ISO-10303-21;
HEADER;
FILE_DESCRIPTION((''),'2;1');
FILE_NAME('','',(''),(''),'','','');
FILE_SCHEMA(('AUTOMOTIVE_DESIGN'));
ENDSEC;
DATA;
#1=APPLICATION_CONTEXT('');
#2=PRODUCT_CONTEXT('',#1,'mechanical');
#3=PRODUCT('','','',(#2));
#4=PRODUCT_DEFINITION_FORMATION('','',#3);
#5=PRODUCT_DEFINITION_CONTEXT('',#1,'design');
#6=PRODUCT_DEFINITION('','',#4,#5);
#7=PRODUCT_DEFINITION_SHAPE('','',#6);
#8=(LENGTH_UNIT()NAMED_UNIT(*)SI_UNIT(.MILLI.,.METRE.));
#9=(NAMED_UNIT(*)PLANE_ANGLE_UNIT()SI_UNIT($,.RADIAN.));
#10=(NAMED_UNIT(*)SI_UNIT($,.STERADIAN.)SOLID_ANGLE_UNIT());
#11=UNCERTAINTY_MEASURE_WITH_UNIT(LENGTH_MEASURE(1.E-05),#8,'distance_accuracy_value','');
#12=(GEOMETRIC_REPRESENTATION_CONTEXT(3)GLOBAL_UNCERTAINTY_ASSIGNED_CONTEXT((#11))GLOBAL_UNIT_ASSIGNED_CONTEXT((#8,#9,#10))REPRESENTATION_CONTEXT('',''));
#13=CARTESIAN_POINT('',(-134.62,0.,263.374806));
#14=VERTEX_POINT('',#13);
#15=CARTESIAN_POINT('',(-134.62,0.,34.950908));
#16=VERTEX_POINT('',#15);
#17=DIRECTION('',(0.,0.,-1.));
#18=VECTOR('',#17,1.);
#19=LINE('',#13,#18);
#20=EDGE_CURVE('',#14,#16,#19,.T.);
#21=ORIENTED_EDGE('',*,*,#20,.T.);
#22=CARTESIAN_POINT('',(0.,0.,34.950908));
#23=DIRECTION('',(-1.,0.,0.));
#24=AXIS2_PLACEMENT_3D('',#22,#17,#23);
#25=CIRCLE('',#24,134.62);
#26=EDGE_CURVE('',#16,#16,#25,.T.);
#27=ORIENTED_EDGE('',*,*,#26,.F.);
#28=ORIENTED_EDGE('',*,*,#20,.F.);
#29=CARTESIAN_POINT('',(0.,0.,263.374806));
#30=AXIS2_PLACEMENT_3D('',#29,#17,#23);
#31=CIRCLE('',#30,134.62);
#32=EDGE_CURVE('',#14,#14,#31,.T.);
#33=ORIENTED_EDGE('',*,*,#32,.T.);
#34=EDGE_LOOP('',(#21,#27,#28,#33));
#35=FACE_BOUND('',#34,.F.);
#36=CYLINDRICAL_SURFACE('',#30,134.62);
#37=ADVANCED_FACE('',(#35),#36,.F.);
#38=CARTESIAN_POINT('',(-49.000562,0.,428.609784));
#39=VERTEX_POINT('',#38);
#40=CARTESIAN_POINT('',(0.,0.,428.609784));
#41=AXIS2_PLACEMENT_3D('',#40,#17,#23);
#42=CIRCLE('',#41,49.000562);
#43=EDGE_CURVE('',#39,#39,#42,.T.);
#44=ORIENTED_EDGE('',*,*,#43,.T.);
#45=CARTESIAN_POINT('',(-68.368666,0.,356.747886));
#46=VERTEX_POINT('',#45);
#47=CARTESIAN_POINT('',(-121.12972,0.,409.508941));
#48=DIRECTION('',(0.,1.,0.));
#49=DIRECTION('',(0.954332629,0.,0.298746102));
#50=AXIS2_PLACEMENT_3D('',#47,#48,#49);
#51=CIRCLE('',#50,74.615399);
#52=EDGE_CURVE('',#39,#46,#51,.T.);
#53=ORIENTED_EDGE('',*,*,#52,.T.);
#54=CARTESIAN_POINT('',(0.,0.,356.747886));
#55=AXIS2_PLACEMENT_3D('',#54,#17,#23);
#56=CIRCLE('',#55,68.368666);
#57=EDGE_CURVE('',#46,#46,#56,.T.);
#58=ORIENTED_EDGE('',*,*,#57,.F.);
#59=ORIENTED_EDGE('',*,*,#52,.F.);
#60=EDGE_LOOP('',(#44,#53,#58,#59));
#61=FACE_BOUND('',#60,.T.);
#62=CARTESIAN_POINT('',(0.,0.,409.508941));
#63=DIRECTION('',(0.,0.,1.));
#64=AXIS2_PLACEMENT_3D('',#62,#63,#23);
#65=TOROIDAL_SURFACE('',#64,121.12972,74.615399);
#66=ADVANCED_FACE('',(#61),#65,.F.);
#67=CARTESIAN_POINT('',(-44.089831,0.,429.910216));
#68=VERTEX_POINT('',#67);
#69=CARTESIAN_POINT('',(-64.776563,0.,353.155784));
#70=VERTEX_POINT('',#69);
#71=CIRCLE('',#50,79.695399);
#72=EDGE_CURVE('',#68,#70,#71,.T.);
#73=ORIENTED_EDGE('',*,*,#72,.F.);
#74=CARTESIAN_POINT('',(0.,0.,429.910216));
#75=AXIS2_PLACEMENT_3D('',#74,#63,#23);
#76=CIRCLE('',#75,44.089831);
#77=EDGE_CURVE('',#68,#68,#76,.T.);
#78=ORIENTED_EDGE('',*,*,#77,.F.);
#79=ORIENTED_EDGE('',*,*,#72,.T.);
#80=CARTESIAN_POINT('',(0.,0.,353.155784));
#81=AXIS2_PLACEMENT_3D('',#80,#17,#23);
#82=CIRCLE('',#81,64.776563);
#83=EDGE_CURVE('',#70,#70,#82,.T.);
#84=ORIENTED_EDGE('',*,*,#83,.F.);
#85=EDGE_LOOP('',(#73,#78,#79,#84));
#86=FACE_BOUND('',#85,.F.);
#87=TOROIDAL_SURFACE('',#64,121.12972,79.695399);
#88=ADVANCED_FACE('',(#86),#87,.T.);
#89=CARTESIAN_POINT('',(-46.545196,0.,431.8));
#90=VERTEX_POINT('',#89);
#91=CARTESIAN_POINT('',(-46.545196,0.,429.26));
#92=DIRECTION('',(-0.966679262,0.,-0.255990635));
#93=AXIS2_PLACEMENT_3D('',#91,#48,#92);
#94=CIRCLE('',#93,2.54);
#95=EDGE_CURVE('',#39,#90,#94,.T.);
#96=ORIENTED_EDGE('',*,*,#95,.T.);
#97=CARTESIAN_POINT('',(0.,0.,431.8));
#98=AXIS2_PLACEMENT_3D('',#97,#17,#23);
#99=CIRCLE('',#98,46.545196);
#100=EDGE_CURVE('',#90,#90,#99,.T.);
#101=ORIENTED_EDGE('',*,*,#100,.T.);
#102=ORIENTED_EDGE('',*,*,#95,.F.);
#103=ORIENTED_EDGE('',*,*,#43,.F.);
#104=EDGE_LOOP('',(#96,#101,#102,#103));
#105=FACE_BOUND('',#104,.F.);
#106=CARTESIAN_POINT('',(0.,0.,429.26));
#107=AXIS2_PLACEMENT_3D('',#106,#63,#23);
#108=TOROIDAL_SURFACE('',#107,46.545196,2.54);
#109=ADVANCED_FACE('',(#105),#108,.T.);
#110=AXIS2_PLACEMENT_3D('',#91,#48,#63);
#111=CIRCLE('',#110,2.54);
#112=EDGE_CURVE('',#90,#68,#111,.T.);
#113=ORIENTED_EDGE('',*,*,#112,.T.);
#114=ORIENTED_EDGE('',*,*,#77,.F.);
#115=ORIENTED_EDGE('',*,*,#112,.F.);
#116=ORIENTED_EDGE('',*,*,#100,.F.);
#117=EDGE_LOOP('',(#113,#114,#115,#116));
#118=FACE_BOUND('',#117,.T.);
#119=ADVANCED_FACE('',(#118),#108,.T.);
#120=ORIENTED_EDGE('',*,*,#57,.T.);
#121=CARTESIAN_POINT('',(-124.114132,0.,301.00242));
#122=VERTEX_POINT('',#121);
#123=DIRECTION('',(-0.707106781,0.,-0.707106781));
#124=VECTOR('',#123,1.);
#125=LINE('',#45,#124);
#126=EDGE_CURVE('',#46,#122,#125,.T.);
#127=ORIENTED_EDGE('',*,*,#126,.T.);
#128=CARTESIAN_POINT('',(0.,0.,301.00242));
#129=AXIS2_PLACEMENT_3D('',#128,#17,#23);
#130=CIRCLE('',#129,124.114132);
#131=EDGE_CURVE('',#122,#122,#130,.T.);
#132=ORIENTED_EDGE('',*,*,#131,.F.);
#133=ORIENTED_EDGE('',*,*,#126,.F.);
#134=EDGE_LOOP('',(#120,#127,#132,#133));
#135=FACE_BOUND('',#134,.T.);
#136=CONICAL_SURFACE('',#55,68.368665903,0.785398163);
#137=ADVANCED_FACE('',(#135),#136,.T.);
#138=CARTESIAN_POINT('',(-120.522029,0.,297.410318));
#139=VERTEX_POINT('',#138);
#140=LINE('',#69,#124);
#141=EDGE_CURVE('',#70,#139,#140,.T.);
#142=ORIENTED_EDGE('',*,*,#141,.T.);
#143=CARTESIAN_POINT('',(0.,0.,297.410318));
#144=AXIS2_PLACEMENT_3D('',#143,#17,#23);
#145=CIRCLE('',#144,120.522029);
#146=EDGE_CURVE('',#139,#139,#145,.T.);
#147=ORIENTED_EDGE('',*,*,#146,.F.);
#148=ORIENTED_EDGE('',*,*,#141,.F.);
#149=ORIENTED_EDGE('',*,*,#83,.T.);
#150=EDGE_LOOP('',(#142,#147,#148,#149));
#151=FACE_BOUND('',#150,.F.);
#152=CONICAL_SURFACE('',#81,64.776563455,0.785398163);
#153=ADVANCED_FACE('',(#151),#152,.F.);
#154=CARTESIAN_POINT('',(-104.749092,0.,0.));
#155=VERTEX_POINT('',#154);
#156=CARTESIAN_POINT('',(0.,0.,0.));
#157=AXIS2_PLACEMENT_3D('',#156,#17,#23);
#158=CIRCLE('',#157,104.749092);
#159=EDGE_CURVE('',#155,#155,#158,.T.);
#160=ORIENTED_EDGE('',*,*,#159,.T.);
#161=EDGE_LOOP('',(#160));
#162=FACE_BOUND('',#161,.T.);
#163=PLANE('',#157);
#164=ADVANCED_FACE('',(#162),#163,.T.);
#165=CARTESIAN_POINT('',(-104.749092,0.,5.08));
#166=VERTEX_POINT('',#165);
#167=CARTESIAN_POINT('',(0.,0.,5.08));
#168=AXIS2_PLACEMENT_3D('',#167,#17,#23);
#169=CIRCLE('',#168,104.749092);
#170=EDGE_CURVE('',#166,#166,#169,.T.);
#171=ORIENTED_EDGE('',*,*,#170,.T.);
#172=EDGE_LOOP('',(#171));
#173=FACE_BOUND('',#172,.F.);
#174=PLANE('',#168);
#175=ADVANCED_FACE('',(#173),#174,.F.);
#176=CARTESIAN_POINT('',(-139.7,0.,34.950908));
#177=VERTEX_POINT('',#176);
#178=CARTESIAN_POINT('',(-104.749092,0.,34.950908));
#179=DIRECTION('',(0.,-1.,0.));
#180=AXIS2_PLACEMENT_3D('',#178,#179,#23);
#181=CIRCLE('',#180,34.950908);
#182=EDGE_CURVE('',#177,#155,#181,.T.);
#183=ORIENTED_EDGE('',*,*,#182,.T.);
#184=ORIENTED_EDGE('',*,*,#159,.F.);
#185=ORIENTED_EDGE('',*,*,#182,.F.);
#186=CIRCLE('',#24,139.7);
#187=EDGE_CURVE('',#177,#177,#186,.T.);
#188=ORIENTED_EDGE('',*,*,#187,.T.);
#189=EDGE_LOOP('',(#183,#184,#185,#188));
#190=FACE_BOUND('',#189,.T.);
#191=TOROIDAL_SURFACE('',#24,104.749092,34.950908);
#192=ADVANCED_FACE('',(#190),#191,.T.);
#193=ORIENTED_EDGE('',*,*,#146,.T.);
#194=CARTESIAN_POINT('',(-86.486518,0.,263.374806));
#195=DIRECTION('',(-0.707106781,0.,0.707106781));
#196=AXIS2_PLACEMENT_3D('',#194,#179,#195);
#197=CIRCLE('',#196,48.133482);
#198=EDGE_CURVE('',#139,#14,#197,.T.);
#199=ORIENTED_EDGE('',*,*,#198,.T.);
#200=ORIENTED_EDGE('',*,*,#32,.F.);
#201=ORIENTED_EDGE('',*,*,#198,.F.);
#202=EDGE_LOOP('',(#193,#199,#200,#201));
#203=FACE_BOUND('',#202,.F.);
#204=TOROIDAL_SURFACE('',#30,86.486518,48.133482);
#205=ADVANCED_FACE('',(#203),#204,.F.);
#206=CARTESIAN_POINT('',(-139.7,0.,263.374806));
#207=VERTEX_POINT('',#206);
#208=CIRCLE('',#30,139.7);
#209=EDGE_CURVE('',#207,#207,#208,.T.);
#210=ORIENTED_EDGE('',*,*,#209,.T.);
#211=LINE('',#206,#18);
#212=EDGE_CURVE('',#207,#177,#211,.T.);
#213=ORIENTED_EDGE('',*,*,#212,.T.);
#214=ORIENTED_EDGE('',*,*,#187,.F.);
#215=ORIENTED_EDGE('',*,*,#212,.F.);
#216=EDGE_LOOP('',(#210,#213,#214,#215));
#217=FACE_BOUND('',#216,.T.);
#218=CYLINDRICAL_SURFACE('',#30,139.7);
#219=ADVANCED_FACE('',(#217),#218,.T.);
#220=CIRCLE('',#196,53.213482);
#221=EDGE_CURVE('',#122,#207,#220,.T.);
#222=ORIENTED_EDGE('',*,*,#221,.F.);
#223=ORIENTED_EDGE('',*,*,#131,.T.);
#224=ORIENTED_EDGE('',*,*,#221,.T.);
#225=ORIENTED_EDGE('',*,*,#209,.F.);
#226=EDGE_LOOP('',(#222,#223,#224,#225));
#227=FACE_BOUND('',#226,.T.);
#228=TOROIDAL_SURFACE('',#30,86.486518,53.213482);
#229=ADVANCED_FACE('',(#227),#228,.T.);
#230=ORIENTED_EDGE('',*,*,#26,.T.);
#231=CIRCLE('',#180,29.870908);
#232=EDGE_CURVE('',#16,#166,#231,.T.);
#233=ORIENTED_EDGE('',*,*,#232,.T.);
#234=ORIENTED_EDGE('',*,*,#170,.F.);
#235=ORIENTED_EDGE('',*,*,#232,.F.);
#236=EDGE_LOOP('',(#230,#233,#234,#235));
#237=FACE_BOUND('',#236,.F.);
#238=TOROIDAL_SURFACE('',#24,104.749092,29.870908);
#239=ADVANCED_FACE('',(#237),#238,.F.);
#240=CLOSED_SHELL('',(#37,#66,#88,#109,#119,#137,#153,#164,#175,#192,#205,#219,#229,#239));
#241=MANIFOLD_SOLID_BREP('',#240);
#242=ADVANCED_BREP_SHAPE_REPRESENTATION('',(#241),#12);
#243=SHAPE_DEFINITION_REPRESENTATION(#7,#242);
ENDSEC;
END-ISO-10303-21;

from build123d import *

# Parameters (mm, degrees)
F2_T = -5.08


# Not quite as in the source:
# - a fillet or chamfer that OpenCascade refuses, or shapes differently, is made with other operations: its cross-section is extruded or revolved along the edge and cut away or added


with BuildPart() as f1:
    # F0 (on Front) → F1 (revolve)
    with BuildSketch(Plane.XZ):
        with BuildLine():
            Line((-104.749092273, 0), (0, 0))
            Line((0, 0), (0, 431.8))
            Line((0, 431.8), (-49.921810742, 431.8))
            ThreePointArc((-49.921810742, 431.8), (-48.6708978442, 391.6994834486), (-68.3686659031, 356.7478862853))
            Line((-68.3686659031, 356.7478862853), (-124.1141319396, 301.0024202488))
            ThreePointArc((-124.1141319396, 301.0024202488), (-135.6493648648, 283.7387241792), (-139.7, 263.374806196))
            Line((-139.7, 263.374806196), (-139.7, 34.950907727))
            ThreePointArc((-139.7, 34.950907727), (-129.4631161354, 10.2368838646), (-104.749092273, 0))
        make_face()
    revolve(axis=Axis((0, 0, 215.9), (0, 0, -1)))

    # F2
    f2_openings = [f1.faces().sort_by_distance(p)[0] for p in [
        (0, 0, 431.8),
    ]]
    offset(amount=F2_T, openings=f2_openings)

    # F3: fillet of radius 2.54 on 2 edges, made by hand

    # F3_s1 → F3_t2 (revolve, cut)
    with BuildSketch(Plane.XZ):
        with BuildLine():
            ThreePointArc((-49.0005618222, 428.6097837881), (-48.558048849, 430.8092015398), (-46.5451964974, 431.8))
            Line((-46.5451964974, 431.8), (-49.921810742, 431.8))
            ThreePointArc((-49.921810742, 431.8), (-49.4434375246, 430.2100172594), (-49.0005618222, 428.6097837881))
        make_face()
    revolve(axis=Axis((0, 0, 431.8), (0, 0, -1)), mode=Mode.SUBTRACT)

    # F3_s3 → F3_t4 (revolve, cut)
    with BuildSketch(Plane.XZ):
        with BuildLine():
            ThreePointArc((-46.5451964974, 431.8), (-44.9959949577, 431.2728523515), (-44.0898311727, 429.9102162119))
            ThreePointArc((-44.0898311727, 429.9102162119), (-44.3467229528, 430.8567245972), (-44.6152430168, 431.8))
            Line((-44.6152430168, 431.8), (-46.5451964974, 431.8))
        make_face()
    revolve(axis=Axis((0, 0, 431.8), (0, 0, 1)), mode=Mode.SUBTRACT)


solid = f1.part
